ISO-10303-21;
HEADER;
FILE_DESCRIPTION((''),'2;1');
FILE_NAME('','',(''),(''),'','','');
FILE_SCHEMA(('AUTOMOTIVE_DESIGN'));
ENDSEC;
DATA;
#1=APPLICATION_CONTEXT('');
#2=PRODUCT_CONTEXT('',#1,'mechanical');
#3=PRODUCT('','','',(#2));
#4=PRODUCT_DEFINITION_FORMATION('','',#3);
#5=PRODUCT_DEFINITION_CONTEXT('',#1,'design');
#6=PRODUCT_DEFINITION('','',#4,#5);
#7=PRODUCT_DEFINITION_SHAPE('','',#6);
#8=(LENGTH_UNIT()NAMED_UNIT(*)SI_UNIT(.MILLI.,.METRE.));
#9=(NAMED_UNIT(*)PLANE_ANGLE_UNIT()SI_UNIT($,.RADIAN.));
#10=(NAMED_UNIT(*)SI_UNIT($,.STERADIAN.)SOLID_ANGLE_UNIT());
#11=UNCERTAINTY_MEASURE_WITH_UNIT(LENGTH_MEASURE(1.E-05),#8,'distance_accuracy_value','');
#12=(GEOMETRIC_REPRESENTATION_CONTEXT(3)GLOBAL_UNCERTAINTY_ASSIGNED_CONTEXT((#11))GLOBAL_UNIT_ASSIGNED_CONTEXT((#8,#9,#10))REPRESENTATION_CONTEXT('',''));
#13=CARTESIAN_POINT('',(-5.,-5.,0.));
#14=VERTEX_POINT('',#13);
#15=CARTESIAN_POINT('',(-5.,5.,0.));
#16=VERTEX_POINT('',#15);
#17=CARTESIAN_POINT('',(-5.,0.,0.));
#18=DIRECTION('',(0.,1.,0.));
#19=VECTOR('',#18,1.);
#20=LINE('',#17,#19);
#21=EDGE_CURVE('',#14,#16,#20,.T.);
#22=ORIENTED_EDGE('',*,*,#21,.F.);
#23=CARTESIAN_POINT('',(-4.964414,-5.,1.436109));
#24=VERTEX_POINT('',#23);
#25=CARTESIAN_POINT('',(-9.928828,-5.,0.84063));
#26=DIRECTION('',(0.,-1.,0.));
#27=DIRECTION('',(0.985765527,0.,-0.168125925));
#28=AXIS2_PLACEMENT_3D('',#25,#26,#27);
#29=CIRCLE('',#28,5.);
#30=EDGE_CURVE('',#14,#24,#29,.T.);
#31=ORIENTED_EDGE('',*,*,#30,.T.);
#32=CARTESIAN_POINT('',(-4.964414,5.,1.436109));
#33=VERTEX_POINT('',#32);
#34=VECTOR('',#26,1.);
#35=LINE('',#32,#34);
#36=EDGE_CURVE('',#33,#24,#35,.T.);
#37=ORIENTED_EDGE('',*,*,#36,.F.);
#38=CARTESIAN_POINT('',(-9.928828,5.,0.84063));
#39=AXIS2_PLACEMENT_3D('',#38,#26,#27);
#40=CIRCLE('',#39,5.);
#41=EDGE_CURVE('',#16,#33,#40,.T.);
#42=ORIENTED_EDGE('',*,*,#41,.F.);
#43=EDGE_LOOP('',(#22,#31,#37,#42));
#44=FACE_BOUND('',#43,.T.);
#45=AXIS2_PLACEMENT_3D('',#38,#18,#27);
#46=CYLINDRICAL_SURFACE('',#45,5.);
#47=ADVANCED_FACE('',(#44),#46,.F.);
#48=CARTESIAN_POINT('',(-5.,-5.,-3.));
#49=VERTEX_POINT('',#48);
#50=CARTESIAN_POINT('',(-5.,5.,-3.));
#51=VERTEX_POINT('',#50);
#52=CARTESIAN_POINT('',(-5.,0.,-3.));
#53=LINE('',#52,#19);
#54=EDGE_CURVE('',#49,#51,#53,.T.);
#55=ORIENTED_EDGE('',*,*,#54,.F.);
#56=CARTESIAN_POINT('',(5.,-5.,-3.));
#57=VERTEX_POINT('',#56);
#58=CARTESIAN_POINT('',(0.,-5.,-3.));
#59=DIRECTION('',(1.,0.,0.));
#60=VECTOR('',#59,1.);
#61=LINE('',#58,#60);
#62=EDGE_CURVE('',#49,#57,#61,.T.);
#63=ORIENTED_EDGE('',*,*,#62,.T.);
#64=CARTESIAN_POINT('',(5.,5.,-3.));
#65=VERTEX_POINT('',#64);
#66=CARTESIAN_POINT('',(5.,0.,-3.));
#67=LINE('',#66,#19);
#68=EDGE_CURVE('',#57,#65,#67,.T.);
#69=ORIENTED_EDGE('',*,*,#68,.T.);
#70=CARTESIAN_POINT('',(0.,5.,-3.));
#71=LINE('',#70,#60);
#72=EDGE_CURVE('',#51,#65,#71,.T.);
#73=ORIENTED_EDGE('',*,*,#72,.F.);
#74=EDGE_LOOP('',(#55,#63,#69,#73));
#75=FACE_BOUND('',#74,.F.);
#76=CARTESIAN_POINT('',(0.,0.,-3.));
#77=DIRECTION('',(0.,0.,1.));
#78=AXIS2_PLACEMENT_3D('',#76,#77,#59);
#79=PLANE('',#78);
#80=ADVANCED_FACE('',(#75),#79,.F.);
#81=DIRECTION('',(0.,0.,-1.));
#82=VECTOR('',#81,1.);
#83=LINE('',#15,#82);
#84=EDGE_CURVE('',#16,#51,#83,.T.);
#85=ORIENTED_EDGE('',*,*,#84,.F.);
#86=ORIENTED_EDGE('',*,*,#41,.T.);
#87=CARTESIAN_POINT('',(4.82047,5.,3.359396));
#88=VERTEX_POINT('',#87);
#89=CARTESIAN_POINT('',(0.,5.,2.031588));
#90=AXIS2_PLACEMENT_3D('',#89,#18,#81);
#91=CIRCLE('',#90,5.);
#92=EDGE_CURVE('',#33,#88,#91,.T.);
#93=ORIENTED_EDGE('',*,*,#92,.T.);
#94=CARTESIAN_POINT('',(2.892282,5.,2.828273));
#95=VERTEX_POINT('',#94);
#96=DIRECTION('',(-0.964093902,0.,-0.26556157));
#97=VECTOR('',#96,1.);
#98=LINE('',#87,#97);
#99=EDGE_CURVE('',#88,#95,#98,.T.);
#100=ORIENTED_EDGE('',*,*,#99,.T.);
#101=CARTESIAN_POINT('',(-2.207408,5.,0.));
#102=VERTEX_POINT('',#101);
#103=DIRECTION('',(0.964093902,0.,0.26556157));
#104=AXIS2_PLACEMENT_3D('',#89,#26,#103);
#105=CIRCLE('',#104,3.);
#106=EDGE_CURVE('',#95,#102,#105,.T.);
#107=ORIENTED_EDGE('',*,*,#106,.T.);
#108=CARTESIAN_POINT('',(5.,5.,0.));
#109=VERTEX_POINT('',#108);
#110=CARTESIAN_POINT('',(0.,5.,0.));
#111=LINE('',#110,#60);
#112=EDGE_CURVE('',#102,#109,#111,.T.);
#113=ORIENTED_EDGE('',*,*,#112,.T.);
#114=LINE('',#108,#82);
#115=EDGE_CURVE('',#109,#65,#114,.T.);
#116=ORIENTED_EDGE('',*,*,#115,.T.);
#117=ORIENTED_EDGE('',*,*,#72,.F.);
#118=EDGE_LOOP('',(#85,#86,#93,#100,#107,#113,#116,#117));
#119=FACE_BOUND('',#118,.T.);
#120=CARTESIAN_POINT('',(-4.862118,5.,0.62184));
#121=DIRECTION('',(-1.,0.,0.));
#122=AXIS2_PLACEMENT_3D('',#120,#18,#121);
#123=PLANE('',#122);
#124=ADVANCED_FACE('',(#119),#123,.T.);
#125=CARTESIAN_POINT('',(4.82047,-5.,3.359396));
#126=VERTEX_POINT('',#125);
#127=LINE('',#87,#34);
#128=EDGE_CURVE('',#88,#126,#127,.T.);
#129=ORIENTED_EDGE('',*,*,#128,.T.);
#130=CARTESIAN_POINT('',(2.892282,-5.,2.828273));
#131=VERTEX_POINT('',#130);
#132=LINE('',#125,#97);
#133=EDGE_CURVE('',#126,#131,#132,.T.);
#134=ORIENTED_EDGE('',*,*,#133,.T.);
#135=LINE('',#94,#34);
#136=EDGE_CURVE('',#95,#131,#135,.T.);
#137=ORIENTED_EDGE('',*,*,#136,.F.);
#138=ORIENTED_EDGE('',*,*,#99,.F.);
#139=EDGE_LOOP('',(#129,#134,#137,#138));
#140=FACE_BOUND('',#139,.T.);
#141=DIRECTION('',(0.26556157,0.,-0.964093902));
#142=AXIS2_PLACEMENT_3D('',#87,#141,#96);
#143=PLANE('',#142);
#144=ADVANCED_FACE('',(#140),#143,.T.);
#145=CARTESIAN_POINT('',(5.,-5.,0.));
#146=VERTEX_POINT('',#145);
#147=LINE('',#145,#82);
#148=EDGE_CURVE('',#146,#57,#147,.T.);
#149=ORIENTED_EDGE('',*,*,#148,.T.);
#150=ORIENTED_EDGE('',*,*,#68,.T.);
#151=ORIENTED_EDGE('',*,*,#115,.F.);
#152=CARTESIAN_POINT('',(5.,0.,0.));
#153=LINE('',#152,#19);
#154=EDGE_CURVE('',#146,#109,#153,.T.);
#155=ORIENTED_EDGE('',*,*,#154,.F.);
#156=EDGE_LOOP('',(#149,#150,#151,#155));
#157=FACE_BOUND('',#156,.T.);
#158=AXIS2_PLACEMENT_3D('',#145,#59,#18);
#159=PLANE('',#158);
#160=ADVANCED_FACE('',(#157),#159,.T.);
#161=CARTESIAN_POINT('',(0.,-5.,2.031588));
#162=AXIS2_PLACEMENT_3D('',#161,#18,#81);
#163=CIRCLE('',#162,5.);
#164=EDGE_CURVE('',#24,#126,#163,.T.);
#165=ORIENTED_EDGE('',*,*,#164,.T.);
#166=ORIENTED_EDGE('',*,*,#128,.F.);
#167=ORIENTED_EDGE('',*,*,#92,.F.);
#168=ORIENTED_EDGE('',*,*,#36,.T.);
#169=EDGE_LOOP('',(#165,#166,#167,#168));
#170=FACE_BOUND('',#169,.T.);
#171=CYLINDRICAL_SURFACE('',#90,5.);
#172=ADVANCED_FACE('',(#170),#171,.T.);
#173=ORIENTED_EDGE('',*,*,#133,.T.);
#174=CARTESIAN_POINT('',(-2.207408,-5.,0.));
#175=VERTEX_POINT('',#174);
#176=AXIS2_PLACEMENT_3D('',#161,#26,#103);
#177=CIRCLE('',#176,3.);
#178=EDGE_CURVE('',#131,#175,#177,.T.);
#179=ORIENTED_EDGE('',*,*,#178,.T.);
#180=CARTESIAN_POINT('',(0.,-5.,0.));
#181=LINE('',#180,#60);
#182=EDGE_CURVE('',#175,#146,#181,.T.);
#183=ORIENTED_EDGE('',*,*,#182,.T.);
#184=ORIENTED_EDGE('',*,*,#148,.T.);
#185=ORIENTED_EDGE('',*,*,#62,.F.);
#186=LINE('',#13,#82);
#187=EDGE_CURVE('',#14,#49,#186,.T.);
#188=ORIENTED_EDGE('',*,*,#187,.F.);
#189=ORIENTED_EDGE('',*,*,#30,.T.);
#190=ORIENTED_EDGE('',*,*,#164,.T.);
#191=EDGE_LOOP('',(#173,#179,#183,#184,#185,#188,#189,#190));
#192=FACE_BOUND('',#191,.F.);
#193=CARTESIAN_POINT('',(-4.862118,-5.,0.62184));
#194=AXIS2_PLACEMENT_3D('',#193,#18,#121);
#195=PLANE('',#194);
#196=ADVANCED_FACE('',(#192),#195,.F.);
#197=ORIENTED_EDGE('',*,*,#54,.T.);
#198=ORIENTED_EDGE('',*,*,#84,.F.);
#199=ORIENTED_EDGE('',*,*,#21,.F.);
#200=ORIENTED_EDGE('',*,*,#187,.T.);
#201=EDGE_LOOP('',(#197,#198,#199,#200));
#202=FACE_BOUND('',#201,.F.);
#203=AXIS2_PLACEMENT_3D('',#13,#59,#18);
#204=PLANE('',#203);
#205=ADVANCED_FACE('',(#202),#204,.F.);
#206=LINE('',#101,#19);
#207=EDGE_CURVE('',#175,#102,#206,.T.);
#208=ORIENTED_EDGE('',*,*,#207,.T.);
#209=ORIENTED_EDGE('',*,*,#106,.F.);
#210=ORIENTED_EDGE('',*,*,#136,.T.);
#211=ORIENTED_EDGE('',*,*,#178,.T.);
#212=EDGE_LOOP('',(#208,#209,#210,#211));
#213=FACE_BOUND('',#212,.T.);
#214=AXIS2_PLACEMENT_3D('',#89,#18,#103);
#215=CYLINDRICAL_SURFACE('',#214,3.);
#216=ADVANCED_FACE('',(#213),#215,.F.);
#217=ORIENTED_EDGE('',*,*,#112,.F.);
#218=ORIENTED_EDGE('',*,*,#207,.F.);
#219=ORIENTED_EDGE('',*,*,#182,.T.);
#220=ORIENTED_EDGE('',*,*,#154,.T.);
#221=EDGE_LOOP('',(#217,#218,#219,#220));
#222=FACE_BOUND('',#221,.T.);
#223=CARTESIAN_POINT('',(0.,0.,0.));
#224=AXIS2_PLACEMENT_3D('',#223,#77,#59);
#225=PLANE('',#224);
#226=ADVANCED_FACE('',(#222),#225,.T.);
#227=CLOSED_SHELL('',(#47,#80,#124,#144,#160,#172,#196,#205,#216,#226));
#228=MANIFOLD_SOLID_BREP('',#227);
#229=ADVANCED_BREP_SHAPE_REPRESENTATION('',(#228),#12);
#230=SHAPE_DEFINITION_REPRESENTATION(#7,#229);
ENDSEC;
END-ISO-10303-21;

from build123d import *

# Parameters (mm, degrees)
F0_W        = 10
F0_H        = 10
F1_DEPTH    = 3
F3_DEPTH    = 10
F4_T1_DEPTH = 10


# Not quite as in the source:
# - a fillet or chamfer that OpenCascade refuses, or shapes differently, is made with other operations: its cross-section is extruded or revolved along the edge and cut away or added


with BuildPart() as f1:
    # F0 (on Top) → F1 (new body)
    with BuildSketch(Plane.XY):
        Rectangle(F0_W, F0_H)
    extrude(amount=-F1_DEPTH)

    # F2 (on face) → F3 (join)
    with BuildSketch(Plane(origin=(0, 5, 0), x_dir=(-1, 0, 0), z_dir=(0, 1, 0))):
        with BuildLine():
            Line((0, -0.9684120044), (0, -2.9684120044))
            ThreePointArc((0, -2.9684120044), (3.9773759731, 5.0615187488), (-4.8204695111, 3.359395848))
            Line((-4.8204695111, 3.359395848), (-2.8922817066, 2.828272707))
            ThreePointArc((-2.8922817066, 2.828272707), (2.3864255838, 3.8495464475), (0, -0.9684120044))
        make_face()
    extrude(amount=-F3_DEPTH)

    # F4: fillet of radius 5 on 1 edges, made by hand

    # F4_s2 → F4_t1 (join)
    with BuildSketch(Plane.XZ.offset(-5)):
        with BuildLine():
            ThreePointArc((-5, 0), (-4.930361996, 0.7167697097), (-4.9644138164, 1.4361088104))
            ThreePointArc((-4.9644138164, 1.4361088104), (-4.8203188847, 0.7032334307), (-4.5686595645, 0))
            Line((-4.5686595645, 0), (-5, 0))
        make_face()
    extrude(amount=F4_T1_DEPTH)


solid = f1.part
